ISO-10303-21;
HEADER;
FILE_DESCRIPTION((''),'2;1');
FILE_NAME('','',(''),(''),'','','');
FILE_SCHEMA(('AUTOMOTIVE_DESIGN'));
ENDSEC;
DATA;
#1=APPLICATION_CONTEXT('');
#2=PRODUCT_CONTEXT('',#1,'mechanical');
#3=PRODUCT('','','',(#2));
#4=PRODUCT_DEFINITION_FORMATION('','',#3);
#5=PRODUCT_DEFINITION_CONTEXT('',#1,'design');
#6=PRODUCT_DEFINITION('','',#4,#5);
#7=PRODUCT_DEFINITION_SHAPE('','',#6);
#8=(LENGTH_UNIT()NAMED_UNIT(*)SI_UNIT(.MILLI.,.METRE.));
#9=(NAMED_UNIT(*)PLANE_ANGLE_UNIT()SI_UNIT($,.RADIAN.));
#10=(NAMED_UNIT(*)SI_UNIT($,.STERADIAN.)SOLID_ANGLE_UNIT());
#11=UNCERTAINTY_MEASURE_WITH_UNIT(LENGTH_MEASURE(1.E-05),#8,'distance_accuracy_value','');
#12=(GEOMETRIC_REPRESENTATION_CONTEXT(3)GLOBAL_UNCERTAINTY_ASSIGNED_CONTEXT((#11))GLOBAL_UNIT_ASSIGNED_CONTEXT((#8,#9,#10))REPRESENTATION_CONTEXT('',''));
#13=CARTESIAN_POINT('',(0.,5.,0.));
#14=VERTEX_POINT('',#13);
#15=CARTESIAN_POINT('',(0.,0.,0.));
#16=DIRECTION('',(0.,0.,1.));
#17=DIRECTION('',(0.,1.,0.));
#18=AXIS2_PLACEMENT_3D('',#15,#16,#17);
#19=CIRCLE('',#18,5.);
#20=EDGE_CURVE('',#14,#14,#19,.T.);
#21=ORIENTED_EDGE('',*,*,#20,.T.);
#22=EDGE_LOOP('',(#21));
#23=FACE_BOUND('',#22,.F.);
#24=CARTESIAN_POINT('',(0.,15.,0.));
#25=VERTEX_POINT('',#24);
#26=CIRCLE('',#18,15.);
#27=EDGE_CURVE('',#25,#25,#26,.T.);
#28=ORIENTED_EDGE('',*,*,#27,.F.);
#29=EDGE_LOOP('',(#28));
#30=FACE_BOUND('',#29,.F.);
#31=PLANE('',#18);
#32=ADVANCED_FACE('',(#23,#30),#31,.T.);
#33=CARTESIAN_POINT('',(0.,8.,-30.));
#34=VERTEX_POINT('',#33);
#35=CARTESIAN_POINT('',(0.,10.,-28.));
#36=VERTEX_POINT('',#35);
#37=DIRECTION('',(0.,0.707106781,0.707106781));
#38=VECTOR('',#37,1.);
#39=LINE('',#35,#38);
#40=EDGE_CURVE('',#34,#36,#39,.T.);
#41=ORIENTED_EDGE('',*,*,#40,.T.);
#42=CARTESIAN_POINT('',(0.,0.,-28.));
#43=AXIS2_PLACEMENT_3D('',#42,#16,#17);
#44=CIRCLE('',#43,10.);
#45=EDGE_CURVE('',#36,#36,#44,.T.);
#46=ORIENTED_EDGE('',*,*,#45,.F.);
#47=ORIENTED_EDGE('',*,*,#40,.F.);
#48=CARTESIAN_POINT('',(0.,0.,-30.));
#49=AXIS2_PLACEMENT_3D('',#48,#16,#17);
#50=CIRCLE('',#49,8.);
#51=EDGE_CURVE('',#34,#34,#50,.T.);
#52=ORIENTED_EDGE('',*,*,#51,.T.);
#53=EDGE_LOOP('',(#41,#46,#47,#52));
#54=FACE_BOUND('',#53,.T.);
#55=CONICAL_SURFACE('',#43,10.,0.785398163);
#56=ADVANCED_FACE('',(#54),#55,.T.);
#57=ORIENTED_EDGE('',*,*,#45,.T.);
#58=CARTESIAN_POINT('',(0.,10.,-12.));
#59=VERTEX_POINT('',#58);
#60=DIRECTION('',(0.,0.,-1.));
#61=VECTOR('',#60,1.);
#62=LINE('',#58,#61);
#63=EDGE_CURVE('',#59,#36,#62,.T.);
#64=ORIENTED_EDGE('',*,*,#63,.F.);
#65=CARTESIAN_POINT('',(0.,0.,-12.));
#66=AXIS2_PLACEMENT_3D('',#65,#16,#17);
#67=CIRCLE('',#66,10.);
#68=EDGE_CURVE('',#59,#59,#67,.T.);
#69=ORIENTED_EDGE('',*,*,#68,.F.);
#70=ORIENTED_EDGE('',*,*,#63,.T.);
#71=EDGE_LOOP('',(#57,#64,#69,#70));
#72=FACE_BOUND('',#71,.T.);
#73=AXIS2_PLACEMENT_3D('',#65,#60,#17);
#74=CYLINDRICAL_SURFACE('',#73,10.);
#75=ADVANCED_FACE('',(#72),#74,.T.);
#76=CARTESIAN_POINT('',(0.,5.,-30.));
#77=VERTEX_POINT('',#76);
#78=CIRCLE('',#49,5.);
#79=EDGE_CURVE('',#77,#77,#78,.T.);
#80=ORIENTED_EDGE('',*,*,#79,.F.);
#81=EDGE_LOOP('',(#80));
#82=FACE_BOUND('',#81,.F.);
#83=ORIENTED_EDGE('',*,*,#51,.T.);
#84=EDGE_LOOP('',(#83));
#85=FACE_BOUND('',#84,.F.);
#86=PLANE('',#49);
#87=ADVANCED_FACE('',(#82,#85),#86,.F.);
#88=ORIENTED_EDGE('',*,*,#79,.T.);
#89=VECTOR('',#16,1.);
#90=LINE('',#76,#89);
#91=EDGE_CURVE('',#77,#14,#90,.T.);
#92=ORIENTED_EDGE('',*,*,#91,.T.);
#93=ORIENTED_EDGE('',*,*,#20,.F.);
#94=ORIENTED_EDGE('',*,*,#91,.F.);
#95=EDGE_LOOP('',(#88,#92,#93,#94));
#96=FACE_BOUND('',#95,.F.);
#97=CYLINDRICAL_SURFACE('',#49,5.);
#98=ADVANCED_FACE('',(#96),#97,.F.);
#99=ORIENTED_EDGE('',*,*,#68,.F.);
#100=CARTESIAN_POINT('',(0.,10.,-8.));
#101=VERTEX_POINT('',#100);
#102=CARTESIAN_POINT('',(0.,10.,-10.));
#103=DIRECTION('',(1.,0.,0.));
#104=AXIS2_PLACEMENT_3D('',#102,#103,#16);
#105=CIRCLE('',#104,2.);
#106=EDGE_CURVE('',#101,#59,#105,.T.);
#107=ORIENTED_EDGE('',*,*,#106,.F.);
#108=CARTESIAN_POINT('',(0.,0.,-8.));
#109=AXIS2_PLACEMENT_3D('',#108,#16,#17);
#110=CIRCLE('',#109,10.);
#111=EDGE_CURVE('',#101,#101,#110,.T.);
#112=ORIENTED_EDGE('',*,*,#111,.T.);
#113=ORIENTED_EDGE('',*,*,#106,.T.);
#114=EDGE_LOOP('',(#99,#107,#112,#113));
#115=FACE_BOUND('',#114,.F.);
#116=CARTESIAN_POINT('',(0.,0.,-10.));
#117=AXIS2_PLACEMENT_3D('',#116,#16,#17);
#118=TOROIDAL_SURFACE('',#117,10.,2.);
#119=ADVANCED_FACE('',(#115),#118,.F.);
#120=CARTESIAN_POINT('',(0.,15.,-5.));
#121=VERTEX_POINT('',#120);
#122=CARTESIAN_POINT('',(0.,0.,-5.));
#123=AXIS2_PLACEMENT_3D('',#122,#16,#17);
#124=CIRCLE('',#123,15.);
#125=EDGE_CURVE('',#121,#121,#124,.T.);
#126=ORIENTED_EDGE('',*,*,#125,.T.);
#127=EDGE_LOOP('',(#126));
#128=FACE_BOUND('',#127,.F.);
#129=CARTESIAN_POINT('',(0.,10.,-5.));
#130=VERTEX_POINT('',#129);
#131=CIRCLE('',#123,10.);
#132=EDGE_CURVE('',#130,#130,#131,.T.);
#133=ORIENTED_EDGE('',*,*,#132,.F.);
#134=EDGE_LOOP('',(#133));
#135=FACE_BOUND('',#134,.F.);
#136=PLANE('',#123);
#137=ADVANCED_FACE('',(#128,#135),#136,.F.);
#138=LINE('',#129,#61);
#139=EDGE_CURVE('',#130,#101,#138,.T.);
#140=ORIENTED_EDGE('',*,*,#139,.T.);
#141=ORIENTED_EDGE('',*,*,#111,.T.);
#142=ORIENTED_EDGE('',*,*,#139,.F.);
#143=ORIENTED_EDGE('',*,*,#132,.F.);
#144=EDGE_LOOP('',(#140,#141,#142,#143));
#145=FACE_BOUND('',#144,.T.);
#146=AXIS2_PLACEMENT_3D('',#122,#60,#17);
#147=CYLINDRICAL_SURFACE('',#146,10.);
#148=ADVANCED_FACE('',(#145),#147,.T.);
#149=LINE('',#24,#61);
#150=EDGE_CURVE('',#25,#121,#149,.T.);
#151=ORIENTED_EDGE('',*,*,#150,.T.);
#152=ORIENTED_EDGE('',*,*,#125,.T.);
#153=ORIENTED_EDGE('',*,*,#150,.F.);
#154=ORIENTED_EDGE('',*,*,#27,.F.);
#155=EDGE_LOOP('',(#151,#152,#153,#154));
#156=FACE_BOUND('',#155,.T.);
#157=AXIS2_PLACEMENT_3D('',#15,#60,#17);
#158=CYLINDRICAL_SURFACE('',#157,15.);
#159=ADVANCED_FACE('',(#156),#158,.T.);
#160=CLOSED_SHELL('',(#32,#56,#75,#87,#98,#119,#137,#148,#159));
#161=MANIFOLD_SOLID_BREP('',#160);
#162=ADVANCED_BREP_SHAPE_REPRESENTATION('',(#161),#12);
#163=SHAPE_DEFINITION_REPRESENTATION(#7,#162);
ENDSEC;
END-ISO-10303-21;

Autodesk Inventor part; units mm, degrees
ref_plane "YZ Plane" through (0, 0, 0) normal (1, 0, 0) x (0, 1, 0)
ref_plane "XZ Plane" through (0, 0, 0) normal (0, 1, 0) x (-1, 0, 0)
ref_plane "XY Plane" through (0, 0, 0) normal (0, 0, 1) x (1, 0, 0)
sketch "Esboço1" plane through (0, 0, 0) normal (1, 0, 0) x (0, 1, 0)
  line L0 (0, 0) -> (15, 0)
  line L1 (15, 0) -> (15, -5)
  line L2 (15, -5) -> (10, -5)
  line L3 (10, -30) -> (0, -30)
  line L4 (0, -30) -> (0, 0)
  line L5 (10, -5) -> (10, -8)
  arc A0 (10, -8) -> (10, -12) centre (10, -10) ccw
  line L6 (10, -12) -> (10, -30)
  point P0 (12.5, -5)
  point P1 (10, -6.5)
  dimension "d0" = 30
  dimension "d2" = 5
  dimension "d3" = 30
  dimension "d5" = 20
  dimension "d6" = 2
  dimension "d14" = 20
revolve "Revolução1" add sketch "Esboço1" angle 360 about axis through (0, 0, -30) along (0, 0, 1)
sketch "Esboço2" plane through (0, 0, -30) normal (0, 0, -1) x (-1, 0, 0)
  circle A0 centre (0, 0) radius 10 projected
hole "Furo1" at (0, 0, -30) direction (0, 0, 1) diameter 10 end through all
thread "Rosca1" size "M20x2.5" class "6g" standard "ANSI Metric M Profile" length 15
chamfer "Chanfro1" distance 2 angle 45 1 edges at (0, -10, -30)
properties part number "3D Model"
